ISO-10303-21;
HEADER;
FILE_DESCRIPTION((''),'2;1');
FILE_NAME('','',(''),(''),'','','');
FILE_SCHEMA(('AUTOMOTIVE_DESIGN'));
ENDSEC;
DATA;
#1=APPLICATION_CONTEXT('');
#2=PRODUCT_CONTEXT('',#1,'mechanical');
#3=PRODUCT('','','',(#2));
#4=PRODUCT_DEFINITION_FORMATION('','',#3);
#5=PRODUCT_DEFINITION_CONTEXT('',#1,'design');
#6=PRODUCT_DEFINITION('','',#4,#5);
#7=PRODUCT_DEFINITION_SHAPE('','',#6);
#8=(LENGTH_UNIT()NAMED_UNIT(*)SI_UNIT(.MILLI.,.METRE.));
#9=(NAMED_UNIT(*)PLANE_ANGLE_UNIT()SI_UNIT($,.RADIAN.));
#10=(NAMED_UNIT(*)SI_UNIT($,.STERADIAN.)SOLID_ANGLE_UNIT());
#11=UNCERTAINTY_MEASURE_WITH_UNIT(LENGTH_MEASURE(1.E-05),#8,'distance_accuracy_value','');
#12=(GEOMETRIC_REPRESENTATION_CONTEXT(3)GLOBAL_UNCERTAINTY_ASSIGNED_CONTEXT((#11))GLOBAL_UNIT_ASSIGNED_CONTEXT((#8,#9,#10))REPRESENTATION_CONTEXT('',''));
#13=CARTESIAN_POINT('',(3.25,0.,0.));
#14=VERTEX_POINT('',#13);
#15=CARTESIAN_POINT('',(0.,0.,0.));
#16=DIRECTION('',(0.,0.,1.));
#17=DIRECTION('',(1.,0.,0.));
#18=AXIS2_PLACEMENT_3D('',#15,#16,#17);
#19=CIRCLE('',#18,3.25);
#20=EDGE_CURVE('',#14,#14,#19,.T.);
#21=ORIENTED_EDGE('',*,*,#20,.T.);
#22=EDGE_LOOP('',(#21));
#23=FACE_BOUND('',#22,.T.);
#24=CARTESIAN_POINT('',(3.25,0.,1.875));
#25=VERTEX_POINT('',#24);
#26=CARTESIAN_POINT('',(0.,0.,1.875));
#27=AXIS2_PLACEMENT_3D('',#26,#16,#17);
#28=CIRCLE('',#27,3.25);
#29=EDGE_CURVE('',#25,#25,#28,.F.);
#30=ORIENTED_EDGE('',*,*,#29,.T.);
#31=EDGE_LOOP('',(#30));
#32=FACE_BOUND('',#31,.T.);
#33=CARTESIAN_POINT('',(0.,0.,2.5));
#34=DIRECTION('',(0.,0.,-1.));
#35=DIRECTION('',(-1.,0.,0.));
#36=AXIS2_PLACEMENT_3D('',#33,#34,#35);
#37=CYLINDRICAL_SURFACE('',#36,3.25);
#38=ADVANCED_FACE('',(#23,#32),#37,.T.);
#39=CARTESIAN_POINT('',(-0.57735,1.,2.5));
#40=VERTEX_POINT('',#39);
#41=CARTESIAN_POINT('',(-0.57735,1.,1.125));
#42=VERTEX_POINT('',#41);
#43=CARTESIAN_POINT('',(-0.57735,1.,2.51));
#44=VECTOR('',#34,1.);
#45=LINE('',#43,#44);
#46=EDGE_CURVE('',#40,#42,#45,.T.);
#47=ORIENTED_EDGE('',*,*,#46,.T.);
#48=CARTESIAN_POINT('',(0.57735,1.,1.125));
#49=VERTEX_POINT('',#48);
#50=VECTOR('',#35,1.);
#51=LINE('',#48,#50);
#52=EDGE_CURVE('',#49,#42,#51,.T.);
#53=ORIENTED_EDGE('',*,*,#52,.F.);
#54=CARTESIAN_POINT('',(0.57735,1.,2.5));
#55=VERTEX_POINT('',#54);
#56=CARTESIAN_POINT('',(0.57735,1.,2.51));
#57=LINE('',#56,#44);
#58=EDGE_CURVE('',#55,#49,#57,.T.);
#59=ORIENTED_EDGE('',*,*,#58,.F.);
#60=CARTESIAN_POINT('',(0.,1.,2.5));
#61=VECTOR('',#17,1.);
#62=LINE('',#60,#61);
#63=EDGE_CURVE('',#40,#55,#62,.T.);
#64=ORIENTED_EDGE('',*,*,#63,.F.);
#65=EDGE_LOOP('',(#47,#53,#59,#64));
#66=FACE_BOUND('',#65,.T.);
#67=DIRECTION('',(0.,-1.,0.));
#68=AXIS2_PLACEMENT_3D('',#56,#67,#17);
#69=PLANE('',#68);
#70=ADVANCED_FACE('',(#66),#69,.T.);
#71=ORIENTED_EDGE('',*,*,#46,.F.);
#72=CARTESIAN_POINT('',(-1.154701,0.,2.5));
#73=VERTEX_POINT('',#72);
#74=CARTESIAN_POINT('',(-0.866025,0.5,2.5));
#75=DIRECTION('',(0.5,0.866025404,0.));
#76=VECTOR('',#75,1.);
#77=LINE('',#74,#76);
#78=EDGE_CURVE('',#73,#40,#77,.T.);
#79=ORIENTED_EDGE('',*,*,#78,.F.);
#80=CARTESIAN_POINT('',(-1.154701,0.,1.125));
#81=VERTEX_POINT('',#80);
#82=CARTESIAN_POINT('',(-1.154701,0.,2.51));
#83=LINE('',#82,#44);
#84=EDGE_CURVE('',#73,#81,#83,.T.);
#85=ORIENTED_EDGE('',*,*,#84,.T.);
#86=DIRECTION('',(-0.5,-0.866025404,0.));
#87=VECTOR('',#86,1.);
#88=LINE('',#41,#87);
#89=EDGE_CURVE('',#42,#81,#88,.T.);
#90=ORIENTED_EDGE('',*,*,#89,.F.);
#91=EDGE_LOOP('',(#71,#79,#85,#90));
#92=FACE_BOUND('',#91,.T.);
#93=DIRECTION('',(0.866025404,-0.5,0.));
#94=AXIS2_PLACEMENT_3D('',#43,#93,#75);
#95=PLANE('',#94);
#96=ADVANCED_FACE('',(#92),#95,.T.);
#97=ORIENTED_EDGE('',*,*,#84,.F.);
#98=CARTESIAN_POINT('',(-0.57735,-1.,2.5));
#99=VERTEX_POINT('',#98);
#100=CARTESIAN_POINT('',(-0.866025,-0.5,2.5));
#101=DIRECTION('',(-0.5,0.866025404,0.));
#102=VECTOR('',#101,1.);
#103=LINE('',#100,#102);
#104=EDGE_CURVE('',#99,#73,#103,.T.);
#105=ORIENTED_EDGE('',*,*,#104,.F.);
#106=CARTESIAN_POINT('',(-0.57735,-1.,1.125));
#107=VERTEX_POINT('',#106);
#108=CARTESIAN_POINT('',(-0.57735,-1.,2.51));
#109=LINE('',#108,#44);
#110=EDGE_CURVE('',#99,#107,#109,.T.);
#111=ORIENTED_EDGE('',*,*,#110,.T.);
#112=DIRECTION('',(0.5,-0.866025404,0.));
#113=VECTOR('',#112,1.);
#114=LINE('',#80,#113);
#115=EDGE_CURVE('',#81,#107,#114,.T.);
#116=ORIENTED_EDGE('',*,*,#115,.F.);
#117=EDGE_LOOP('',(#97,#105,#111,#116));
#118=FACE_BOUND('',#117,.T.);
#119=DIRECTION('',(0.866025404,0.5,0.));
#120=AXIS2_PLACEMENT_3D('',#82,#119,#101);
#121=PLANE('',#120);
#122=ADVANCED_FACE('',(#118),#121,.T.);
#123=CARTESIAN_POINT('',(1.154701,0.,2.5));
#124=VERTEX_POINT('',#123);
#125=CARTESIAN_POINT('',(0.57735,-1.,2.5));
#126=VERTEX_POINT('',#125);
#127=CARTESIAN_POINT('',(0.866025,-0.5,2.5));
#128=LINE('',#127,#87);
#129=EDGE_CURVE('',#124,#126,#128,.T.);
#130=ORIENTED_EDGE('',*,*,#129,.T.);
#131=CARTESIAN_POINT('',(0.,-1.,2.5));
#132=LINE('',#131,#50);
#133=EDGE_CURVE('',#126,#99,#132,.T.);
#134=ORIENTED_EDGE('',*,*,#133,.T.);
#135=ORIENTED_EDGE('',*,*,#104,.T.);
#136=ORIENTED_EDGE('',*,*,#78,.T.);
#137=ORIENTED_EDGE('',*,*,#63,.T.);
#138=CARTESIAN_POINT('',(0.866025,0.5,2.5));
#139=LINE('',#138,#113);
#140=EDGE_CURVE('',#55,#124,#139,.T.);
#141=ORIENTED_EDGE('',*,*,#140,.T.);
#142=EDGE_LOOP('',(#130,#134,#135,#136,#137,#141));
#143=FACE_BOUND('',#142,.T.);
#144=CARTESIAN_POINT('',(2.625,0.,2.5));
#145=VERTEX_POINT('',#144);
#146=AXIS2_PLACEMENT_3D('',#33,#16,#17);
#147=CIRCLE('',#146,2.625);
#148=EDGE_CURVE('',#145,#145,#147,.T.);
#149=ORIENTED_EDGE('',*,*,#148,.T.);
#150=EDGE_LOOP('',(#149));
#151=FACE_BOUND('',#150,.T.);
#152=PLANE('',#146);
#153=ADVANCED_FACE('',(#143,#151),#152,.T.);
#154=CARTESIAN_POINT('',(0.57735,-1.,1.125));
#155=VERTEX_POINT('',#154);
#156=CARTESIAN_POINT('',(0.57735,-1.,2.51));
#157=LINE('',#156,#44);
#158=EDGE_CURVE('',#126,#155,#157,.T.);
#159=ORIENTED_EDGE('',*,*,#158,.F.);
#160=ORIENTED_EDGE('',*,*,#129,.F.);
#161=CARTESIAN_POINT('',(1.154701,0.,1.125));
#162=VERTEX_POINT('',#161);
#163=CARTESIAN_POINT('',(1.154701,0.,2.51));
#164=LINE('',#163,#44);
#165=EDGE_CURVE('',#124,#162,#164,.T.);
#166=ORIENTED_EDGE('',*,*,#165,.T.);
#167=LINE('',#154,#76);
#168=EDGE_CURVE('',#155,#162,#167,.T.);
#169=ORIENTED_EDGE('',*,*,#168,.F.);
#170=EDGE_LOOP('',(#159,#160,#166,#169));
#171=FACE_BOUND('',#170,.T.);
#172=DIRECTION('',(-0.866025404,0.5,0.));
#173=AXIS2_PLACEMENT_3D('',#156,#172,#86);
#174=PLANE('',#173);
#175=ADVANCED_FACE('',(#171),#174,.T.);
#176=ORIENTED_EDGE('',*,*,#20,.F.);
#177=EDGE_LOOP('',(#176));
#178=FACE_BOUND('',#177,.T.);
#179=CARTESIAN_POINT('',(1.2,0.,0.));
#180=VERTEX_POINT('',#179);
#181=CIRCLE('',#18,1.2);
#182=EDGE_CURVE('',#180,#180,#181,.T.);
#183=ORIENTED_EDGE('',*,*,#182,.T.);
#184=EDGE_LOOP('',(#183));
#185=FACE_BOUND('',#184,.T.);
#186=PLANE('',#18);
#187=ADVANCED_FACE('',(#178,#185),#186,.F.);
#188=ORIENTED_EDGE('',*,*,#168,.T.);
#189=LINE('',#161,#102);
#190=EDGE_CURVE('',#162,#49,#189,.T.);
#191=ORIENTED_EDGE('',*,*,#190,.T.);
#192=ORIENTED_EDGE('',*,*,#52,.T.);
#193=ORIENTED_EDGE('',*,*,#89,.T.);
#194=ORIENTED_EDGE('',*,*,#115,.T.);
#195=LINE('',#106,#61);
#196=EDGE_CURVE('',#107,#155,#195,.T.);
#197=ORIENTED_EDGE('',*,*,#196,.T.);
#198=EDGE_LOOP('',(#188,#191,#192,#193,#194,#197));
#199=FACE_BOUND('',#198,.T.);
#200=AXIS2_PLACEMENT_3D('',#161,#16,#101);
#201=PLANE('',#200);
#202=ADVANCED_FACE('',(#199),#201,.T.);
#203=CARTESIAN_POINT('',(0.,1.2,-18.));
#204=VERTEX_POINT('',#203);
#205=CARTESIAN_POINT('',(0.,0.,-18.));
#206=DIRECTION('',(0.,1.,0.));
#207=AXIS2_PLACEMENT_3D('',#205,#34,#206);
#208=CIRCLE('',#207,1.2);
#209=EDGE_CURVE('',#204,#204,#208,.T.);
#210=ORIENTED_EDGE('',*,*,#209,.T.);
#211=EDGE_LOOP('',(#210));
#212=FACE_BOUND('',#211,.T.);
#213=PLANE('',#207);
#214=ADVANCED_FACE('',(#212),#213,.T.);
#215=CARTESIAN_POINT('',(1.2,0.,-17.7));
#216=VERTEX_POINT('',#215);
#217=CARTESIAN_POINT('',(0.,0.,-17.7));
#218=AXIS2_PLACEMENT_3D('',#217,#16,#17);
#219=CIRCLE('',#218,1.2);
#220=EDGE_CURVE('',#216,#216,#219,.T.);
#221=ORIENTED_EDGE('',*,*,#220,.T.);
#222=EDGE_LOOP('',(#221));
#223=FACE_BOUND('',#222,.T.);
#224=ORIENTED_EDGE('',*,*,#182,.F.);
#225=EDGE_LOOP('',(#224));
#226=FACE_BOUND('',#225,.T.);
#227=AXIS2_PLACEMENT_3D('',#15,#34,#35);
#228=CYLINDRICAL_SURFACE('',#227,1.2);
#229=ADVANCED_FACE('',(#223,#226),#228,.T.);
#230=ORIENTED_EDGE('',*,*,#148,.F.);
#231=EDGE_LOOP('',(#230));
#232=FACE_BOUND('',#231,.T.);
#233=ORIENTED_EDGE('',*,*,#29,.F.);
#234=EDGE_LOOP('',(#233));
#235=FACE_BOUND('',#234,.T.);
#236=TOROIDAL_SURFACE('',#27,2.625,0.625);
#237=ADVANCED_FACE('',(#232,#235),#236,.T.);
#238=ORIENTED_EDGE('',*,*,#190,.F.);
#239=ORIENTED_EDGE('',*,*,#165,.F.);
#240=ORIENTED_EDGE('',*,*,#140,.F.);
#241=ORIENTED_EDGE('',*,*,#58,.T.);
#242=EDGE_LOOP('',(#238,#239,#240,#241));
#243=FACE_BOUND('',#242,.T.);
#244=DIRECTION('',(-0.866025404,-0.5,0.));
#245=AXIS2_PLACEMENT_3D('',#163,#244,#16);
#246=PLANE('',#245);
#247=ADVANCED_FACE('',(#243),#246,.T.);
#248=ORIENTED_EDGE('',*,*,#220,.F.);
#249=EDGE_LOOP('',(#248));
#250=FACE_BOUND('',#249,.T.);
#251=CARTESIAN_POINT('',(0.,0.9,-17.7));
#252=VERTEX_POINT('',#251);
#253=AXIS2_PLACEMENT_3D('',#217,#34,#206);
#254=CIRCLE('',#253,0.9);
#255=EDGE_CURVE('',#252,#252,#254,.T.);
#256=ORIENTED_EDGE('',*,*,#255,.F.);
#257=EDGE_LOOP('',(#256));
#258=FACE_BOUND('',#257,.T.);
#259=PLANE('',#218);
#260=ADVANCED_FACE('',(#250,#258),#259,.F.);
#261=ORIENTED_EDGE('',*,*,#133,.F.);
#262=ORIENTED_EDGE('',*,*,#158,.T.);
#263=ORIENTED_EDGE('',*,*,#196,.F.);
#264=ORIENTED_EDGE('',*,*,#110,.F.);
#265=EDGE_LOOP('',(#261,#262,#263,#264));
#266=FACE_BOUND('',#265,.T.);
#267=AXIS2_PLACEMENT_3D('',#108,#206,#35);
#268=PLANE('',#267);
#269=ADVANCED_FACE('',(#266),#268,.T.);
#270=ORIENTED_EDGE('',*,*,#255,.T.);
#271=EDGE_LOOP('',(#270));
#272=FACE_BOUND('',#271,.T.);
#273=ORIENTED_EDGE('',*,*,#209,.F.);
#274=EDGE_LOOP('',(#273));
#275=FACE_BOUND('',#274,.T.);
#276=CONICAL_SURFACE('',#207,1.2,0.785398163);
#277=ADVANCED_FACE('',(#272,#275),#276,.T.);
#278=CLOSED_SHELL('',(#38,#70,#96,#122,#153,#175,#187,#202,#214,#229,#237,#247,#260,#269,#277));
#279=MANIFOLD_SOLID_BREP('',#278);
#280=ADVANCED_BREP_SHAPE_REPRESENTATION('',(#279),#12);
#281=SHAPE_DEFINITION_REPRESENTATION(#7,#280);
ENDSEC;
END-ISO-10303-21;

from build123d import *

# Parameters (mm, degrees)
F_0075_CYLINDER_SKETCH_R    = 3.25
F_0075_CYLINDER_DEPTH       = 2.5
F_0076_FILLET_R             = 0.625
F_0077_EXTRUDE_DEPTH        = 1.385
F_0077_EXTRUDE_ROTATE_ANGLE = 120
F_0080_CYLINDER_SKETCH_R    = 1.2
F_0080_CYLINDER_DEPTH       = 17.7
F_0081_CONE_ROTATE_ANGLE    = 90


with BuildPart() as part:
    # 0075_cylinder_Sketch → 0075_cylinder (new body)
    with BuildSketch(Plane.XY):
        Circle(F_0075_CYLINDER_SKETCH_R)
    extrude(amount=F_0075_CYLINDER_DEPTH)

    # 0076_fillet
    f_0076_fillet_edges = [part.edges().sort_by_distance(p)[0] for p in [
        (-3.25, 0, 2.5),
    ]]
    fillet(f_0076_fillet_edges, radius=F_0076_FILLET_R)


with BuildPart() as body_2:
    # 0077_extrude_Sketch → 0077_extrude (new body)
    with BuildSketch(Plane.XY):
        Polygon((0, 0), (1.154700538, 0), (1.732050808, 1), (1.154700538, 2), (0, 2), (-0.577350269, 1), align=None)
    extrude(amount=F_0077_EXTRUDE_DEPTH)


with BuildPart() as body_2_1:
    # 0077_extrude_Rotate: read off the stored shape, not the designer's step
    # 0077_extrude_Rotate: moved
    add(body_2.part.rotate(Axis((0, 0, 0), (0, 0, 1)), F_0077_EXTRUDE_ROTATE_ANGLE))


with BuildPart() as body_2_2:
    # 0077_extrude_Translate: moved
    add(body_2_1.part.moved(Location((1.154700538, 0, 1.125))))


with BuildPart() as part_1:
    add(part.part)

    # 0079_sub: cut body 2
    add(body_2_2.part, mode=Mode.SUBTRACT)


with BuildPart() as body_2_2_1:
    # 0080_cylinder_Sketch → 0080_cylinder (new body)
    with BuildSketch(Plane.XY):
        Circle(F_0080_CYLINDER_SKETCH_R)
    extrude(amount=F_0080_CYLINDER_DEPTH)


with BuildPart() as body_2_2_2:
    # 0080_cylinder_Translate: moved
    add(body_2_2_1.part.moved(Location((0, 0, -17.7))))


with BuildPart() as body_3:
    # 0081_cone_Sketch → 0081_cone (revolve)
    with BuildSketch(Plane.XY, mode=Mode.PRIVATE) as f_0081_cone_sk:
        Polygon((0, 0), (1.2, 0), (0.9, 0.3), (0, 0.3), align=None)
    revolve(f_0081_cone_sk.sketch.rotate(Axis((0, -100, 0), (0, 1, 0)), 90), axis=Axis((0, -100, 0), (0, 1, 0)))


with BuildPart() as body_3_1:
    # 0081_cone_Rotate: moved
    add(body_3.part.rotate(Axis((0, 0, 0), (1, 0, 0)), F_0081_CONE_ROTATE_ANGLE))


with BuildPart() as body_3_2:
    # 0081_cone_Translate: moved
    add(body_3_1.part.moved(Location((0, 0, -18))))


with BuildPart() as body_2_2_3:
    add(body_2_2_2.part)

    # 0083_add: union body 3
    add(body_3_2.part)


with BuildPart() as part_2:
    add(part_1.part)

    # 0084_add: union body 2 2
    add(body_2_2_3.part)


solid = part_2.part
